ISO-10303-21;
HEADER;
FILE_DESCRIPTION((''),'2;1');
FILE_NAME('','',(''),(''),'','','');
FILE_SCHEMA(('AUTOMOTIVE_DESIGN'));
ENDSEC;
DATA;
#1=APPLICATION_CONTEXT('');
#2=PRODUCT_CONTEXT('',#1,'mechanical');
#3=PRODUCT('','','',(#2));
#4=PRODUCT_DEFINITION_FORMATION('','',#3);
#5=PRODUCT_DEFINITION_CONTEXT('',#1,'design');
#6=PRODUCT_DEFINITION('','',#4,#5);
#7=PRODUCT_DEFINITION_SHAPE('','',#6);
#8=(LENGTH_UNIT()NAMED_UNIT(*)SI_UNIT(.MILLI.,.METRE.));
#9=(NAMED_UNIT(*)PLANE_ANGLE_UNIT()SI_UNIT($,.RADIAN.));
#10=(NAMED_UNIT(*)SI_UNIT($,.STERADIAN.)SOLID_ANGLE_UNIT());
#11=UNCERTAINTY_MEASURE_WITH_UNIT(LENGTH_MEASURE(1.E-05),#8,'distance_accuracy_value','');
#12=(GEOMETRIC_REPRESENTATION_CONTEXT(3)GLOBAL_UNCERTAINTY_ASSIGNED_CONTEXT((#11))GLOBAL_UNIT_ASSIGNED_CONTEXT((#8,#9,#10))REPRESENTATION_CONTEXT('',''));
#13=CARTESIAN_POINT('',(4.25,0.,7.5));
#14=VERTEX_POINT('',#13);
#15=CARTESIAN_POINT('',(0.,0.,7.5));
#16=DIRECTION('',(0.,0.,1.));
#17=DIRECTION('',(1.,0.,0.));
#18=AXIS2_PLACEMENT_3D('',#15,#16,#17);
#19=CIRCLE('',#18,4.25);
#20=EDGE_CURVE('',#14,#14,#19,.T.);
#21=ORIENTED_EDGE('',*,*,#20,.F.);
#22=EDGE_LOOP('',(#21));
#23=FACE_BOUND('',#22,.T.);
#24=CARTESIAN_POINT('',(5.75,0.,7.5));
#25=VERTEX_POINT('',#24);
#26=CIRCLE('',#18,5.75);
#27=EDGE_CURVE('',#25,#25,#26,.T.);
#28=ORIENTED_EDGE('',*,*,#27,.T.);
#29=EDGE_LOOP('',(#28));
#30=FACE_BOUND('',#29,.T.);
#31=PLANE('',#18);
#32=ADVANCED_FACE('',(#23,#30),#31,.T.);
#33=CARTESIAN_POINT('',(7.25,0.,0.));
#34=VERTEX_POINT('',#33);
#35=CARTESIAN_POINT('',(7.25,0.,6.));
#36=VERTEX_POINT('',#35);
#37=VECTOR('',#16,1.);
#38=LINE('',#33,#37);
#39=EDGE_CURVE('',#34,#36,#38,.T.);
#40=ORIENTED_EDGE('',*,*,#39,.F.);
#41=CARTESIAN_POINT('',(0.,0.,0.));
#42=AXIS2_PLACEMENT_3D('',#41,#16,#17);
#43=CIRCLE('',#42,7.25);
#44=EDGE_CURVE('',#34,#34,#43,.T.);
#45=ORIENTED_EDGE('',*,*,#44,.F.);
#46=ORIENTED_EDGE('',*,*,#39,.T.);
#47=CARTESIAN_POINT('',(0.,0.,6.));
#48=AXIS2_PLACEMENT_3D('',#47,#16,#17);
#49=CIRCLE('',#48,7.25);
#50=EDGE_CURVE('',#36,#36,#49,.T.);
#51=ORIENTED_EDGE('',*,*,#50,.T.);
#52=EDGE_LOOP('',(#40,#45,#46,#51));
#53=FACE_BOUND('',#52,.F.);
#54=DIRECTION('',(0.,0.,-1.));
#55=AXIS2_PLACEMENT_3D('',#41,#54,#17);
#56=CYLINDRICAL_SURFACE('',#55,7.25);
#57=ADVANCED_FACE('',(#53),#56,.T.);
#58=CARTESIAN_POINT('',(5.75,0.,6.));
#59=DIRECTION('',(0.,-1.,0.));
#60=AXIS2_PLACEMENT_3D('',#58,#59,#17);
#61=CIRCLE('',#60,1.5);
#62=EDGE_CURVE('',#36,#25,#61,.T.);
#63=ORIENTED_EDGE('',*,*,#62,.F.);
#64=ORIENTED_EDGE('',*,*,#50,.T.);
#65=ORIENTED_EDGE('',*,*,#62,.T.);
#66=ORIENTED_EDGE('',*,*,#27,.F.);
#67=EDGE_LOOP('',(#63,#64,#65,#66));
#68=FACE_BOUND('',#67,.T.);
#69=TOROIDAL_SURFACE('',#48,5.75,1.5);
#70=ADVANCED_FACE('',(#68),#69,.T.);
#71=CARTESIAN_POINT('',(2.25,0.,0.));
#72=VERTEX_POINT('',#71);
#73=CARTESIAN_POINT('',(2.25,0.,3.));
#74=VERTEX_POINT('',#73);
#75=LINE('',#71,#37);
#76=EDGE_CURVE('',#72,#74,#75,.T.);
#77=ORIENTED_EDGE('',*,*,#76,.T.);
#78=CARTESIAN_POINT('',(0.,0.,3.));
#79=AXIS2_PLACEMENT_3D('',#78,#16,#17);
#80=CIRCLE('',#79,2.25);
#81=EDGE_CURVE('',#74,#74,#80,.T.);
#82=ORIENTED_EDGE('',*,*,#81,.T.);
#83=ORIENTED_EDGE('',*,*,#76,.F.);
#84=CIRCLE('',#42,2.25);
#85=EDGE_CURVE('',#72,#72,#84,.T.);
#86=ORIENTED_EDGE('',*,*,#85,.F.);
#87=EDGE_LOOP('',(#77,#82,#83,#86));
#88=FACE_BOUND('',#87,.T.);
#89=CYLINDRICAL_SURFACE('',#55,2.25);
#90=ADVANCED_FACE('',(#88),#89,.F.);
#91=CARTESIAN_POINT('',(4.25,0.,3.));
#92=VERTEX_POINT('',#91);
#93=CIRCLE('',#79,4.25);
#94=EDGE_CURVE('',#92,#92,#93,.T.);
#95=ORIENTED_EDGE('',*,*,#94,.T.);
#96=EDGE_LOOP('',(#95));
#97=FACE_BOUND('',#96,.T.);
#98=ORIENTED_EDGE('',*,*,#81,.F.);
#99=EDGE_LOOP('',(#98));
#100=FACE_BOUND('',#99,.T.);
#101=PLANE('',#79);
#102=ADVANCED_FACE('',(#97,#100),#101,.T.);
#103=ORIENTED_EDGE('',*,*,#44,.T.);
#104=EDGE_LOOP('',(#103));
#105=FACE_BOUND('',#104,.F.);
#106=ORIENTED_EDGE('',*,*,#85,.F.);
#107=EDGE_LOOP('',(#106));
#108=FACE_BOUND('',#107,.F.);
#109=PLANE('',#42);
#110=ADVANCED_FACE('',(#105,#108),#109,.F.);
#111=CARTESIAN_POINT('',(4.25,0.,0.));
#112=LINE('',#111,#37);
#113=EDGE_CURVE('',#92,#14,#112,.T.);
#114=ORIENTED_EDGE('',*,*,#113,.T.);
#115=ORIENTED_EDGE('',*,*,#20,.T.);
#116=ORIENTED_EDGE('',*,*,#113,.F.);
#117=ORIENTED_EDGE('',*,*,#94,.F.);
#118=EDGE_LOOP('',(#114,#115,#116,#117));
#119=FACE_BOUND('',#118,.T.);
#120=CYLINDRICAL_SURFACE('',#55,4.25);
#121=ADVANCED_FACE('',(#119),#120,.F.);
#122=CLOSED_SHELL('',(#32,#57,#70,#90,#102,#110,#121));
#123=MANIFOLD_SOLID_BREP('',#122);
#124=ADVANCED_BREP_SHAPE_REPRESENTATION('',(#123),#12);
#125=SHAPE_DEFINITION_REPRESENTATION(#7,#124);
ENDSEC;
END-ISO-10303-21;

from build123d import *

# Parameters (mm, degrees)
F4_R     = 7.25
F4_R_2   = 4.25
F5_DEPTH = 7.5
F4_R_3   = 2.25
F6_DEPTH = 3
F7_R     = 1.5


# Not quite as in the source:
# - a feature of the source that left no trace in its solid (it failed there, or was rolled back) is left out


with BuildPart() as f5:
    # F4 (on Top) → F5 (new body)
    with BuildSketch(Plane.XY):
        Circle(F4_R)
        Circle(F4_R_2, mode=Mode.SUBTRACT)
    extrude(amount=F5_DEPTH)

    # F4 (on Top) → F6 (join)
    with BuildSketch(Plane.XY):
        Circle(F4_R_2)
        Circle(F4_R_3, mode=Mode.SUBTRACT)
    extrude(amount=F6_DEPTH)

    # F7
    f7_edges = [f5.edges().sort_by_distance(p)[0] for p in [
        (-7.25, 0, 7.5),
    ]]
    fillet(f7_edges, radius=F7_R)


solid = f5.part
